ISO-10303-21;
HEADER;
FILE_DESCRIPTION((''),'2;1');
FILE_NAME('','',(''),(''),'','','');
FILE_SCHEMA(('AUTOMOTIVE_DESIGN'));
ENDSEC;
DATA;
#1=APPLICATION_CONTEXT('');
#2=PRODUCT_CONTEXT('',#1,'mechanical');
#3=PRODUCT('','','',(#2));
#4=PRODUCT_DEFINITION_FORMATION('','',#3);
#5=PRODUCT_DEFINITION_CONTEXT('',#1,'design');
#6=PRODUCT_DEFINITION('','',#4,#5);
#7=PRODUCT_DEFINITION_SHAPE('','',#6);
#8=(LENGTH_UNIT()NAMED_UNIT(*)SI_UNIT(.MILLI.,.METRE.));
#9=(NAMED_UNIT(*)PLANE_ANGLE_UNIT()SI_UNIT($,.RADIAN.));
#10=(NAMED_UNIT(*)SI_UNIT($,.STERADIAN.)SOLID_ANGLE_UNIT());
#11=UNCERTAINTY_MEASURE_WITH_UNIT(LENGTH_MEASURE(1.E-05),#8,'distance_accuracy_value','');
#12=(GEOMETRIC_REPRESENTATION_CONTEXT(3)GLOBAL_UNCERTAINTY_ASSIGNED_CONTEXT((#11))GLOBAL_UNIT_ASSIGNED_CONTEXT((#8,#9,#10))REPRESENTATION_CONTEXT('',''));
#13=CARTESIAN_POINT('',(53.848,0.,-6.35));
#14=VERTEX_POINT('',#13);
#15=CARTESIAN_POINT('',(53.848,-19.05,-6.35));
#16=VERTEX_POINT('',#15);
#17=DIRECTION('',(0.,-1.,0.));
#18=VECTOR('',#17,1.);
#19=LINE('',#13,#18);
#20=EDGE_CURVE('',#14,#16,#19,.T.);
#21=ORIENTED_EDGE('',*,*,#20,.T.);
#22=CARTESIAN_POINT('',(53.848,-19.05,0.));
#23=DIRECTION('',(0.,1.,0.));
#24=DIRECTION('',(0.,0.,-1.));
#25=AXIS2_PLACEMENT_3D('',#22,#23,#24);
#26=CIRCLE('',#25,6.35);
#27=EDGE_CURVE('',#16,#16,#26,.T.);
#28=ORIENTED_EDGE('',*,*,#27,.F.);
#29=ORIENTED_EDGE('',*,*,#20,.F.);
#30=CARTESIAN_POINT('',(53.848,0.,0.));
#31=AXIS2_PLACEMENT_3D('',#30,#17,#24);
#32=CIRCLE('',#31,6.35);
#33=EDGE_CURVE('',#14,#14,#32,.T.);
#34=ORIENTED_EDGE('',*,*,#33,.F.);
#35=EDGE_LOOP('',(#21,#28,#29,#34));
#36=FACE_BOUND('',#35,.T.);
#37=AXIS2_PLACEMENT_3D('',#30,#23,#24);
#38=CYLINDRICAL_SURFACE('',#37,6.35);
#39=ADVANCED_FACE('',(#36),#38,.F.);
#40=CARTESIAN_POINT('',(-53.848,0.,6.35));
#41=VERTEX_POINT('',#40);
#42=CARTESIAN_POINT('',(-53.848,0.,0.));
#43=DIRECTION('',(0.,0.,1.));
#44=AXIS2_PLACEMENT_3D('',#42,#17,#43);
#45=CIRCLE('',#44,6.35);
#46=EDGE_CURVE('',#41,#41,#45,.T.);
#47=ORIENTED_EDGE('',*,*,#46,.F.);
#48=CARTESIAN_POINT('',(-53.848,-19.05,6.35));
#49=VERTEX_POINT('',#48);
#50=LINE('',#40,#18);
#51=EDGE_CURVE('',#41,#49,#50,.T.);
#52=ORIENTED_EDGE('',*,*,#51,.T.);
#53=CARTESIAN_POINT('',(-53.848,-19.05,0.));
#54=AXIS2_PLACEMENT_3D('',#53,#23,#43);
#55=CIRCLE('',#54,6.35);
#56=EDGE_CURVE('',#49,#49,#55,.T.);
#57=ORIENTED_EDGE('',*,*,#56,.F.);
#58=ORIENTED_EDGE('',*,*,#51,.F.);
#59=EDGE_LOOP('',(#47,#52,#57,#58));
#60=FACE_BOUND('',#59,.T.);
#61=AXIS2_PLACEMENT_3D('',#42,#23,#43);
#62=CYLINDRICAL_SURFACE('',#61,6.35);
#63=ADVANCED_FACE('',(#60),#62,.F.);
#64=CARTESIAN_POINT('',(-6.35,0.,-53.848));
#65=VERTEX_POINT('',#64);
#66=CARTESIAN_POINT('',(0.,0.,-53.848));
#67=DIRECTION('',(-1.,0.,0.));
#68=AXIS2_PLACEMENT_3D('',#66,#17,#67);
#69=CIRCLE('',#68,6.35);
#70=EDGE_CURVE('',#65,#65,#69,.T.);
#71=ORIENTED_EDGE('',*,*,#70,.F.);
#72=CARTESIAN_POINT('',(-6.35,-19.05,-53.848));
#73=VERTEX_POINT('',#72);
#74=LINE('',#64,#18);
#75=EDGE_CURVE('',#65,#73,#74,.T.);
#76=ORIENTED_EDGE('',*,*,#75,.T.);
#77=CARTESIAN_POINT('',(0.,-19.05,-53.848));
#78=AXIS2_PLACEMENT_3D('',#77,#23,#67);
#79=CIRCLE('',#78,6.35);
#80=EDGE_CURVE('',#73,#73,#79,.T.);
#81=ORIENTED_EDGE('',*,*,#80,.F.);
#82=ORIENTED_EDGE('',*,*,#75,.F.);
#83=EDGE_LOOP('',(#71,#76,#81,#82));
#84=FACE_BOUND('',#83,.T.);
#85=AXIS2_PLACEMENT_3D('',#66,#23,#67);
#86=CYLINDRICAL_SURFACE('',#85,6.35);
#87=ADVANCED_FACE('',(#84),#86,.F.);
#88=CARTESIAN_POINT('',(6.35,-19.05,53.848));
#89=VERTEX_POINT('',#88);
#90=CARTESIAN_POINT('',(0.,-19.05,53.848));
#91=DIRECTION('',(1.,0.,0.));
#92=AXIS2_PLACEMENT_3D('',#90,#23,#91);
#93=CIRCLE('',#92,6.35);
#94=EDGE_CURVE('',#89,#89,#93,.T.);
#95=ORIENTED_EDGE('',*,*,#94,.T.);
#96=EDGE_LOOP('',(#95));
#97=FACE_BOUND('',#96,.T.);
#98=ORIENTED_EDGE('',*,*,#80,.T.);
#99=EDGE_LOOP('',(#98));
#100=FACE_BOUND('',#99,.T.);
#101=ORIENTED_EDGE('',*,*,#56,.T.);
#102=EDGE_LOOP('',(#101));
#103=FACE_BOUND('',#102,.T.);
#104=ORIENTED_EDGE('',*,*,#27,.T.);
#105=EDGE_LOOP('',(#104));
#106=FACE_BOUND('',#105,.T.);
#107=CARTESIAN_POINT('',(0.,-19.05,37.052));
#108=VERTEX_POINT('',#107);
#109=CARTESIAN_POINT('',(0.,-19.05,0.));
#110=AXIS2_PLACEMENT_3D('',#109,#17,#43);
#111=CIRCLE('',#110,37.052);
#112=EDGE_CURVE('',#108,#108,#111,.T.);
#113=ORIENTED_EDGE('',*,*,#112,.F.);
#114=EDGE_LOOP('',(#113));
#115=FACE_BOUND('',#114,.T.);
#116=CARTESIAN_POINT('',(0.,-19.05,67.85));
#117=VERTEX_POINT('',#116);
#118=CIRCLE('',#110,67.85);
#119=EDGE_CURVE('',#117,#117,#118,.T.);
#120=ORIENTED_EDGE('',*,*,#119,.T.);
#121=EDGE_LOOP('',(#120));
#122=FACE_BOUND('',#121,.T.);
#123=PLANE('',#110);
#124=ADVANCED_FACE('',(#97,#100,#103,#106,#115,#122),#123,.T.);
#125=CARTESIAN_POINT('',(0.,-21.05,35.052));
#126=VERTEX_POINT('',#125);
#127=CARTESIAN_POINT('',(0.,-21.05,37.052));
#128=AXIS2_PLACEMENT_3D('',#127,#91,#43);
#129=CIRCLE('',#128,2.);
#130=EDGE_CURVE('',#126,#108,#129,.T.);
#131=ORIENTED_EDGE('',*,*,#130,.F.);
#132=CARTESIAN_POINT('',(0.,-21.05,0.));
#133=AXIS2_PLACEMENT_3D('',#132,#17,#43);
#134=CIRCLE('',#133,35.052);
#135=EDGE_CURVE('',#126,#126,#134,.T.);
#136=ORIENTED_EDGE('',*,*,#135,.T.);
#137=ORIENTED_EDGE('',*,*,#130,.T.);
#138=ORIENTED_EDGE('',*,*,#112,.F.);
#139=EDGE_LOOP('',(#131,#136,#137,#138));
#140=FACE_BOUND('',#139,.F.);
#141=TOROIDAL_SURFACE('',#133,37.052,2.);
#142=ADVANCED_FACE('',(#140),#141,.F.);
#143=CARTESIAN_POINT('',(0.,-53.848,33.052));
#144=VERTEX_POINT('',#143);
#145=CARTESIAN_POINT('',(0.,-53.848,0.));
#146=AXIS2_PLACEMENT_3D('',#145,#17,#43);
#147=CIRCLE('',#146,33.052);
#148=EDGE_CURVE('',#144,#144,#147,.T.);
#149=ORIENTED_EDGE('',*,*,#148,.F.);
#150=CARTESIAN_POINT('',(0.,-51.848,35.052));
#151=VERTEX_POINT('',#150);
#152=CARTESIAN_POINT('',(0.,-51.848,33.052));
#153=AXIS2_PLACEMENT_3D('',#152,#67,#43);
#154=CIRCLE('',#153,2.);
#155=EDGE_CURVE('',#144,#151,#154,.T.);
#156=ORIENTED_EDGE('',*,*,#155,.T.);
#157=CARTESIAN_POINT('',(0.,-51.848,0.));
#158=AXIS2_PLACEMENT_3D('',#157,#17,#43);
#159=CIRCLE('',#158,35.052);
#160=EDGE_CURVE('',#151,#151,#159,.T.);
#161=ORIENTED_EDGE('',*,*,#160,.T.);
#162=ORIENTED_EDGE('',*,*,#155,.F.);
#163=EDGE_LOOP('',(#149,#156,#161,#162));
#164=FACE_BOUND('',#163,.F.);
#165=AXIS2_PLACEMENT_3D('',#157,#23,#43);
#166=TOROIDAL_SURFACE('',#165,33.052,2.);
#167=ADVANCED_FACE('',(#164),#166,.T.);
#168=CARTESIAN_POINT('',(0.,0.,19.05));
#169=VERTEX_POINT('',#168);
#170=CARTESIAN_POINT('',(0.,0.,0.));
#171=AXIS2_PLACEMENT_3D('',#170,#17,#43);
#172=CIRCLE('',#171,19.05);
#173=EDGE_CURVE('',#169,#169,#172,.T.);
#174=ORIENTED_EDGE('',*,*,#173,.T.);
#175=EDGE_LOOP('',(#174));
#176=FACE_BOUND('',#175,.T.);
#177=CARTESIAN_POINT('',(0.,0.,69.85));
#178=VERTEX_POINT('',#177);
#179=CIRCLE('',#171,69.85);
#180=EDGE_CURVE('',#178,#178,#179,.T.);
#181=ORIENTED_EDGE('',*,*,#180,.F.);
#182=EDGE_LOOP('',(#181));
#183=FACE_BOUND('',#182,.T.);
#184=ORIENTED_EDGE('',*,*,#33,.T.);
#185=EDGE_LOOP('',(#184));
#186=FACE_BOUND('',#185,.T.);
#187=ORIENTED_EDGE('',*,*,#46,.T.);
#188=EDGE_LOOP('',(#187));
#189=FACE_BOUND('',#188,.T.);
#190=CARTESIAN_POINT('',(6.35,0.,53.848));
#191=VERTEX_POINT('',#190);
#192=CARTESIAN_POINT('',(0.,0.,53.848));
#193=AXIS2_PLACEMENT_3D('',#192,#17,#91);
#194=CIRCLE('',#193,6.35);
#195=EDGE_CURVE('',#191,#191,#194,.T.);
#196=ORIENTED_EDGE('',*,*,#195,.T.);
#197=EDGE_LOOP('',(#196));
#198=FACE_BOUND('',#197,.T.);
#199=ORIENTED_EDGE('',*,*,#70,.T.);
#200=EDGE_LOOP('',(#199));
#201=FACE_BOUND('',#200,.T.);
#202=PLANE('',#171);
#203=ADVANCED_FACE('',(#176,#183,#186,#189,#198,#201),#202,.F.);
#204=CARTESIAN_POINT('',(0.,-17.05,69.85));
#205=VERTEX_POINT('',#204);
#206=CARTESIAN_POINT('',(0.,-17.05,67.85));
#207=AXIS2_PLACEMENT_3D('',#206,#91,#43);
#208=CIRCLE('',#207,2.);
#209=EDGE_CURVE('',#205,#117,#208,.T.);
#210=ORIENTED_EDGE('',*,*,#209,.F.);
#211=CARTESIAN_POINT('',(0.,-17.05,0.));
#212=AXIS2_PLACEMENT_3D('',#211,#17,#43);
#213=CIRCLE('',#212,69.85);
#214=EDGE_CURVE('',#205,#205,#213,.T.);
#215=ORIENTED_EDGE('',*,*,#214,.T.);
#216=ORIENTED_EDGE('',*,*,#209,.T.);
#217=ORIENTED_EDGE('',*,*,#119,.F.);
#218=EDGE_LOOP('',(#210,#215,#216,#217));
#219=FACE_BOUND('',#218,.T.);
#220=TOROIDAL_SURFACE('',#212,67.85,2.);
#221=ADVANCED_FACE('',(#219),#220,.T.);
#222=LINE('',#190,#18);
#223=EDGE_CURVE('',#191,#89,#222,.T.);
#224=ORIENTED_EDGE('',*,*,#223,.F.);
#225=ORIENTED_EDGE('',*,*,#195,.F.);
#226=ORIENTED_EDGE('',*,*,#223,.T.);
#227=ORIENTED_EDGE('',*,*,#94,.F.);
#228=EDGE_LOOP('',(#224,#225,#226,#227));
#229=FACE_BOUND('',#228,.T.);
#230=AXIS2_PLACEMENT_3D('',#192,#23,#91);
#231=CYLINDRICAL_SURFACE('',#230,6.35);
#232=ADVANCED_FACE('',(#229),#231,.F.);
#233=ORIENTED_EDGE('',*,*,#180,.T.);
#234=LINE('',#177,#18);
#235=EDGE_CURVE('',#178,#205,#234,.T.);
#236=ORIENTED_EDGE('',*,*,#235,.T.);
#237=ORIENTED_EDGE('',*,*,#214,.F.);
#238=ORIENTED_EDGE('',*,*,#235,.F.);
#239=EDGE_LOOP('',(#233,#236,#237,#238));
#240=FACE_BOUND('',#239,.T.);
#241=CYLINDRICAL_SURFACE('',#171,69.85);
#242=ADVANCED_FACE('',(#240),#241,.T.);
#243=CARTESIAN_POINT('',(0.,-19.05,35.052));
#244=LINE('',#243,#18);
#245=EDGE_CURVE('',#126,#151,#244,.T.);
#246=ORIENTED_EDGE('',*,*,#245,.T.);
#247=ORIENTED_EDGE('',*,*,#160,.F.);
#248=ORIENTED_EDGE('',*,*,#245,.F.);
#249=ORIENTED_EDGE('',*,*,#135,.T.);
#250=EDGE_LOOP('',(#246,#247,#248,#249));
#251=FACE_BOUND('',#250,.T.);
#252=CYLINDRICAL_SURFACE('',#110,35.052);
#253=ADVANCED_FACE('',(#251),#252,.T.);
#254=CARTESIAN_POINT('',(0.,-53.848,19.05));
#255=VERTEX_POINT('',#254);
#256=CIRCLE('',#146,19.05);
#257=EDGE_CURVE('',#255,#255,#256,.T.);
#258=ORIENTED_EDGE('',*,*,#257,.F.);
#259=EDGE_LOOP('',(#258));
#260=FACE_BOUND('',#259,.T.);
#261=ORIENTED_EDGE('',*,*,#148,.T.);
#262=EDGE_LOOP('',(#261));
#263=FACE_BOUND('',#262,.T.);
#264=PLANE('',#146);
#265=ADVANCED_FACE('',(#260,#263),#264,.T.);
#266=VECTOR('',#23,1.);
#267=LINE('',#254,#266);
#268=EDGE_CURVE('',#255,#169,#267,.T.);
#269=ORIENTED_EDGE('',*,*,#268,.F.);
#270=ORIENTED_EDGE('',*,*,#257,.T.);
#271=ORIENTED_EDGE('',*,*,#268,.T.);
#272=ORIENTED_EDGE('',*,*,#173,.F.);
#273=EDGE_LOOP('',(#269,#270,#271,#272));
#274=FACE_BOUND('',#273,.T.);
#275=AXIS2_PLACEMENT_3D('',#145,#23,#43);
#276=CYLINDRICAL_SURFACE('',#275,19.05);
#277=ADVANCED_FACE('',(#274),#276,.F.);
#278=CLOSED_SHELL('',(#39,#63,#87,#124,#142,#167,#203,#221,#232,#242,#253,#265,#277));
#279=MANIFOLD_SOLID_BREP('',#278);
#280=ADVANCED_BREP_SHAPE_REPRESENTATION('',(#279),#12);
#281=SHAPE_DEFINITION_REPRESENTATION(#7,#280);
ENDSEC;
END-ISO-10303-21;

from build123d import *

# Parameters (mm, degrees)
F2_R            = 63.5
F2_R_2          = 6.35
F3_DEPTH        = 53.849
F3_COPIES_COUNT = 4
F4_R            = 2


# Not quite as in the source:
# - a pattern or mirror of a feature is missing from the dataset's text; its kind, count and spacing are read off the source's solid
# - a feature names something its author has since deleted; it is built from what else it names


with BuildPart() as f1:
    # F0 (on Right) → F1 (revolve)
    with BuildSketch(Plane.YZ):
        Polygon((-53.848, 19.05), (0, 19.05), (0, 69.85), (-19.05, 69.85), (-19.05, 35.052), (-53.848, 35.052), align=None)
    revolve(axis=Axis((0, -26.924, 0), (0, -1, 0)))

    # F2 (on Front) → F3 (cut, through all)
    with BuildSketch(Plane.XZ):
        with Locations((0, 265.2071825894)):
            Circle(F2_R)
        with Locations((0, 53.848)):
            Circle(F2_R_2)
    f3 = extrude(amount=F3_DEPTH, mode=Mode.SUBTRACT)

    # F3_copies: F3 ×4 about axis
    f3_copies_axis = Axis((0, 0, 0), (0, 1, 0))
    for i in range(1, F3_COPIES_COUNT):
        add(f3.rotate(f3_copies_axis, i * 360 / F3_COPIES_COUNT), mode=Mode.SUBTRACT)

    # F4
    f4_edges = [f1.edges().sort_by_distance(p)[0] for p in [
        (0, -19.05, -69.85),
        (0, -19.05, -35.052),
        (0, -53.848, -35.052),
    ]]
    fillet(f4_edges, radius=F4_R)


solid = f1.part
